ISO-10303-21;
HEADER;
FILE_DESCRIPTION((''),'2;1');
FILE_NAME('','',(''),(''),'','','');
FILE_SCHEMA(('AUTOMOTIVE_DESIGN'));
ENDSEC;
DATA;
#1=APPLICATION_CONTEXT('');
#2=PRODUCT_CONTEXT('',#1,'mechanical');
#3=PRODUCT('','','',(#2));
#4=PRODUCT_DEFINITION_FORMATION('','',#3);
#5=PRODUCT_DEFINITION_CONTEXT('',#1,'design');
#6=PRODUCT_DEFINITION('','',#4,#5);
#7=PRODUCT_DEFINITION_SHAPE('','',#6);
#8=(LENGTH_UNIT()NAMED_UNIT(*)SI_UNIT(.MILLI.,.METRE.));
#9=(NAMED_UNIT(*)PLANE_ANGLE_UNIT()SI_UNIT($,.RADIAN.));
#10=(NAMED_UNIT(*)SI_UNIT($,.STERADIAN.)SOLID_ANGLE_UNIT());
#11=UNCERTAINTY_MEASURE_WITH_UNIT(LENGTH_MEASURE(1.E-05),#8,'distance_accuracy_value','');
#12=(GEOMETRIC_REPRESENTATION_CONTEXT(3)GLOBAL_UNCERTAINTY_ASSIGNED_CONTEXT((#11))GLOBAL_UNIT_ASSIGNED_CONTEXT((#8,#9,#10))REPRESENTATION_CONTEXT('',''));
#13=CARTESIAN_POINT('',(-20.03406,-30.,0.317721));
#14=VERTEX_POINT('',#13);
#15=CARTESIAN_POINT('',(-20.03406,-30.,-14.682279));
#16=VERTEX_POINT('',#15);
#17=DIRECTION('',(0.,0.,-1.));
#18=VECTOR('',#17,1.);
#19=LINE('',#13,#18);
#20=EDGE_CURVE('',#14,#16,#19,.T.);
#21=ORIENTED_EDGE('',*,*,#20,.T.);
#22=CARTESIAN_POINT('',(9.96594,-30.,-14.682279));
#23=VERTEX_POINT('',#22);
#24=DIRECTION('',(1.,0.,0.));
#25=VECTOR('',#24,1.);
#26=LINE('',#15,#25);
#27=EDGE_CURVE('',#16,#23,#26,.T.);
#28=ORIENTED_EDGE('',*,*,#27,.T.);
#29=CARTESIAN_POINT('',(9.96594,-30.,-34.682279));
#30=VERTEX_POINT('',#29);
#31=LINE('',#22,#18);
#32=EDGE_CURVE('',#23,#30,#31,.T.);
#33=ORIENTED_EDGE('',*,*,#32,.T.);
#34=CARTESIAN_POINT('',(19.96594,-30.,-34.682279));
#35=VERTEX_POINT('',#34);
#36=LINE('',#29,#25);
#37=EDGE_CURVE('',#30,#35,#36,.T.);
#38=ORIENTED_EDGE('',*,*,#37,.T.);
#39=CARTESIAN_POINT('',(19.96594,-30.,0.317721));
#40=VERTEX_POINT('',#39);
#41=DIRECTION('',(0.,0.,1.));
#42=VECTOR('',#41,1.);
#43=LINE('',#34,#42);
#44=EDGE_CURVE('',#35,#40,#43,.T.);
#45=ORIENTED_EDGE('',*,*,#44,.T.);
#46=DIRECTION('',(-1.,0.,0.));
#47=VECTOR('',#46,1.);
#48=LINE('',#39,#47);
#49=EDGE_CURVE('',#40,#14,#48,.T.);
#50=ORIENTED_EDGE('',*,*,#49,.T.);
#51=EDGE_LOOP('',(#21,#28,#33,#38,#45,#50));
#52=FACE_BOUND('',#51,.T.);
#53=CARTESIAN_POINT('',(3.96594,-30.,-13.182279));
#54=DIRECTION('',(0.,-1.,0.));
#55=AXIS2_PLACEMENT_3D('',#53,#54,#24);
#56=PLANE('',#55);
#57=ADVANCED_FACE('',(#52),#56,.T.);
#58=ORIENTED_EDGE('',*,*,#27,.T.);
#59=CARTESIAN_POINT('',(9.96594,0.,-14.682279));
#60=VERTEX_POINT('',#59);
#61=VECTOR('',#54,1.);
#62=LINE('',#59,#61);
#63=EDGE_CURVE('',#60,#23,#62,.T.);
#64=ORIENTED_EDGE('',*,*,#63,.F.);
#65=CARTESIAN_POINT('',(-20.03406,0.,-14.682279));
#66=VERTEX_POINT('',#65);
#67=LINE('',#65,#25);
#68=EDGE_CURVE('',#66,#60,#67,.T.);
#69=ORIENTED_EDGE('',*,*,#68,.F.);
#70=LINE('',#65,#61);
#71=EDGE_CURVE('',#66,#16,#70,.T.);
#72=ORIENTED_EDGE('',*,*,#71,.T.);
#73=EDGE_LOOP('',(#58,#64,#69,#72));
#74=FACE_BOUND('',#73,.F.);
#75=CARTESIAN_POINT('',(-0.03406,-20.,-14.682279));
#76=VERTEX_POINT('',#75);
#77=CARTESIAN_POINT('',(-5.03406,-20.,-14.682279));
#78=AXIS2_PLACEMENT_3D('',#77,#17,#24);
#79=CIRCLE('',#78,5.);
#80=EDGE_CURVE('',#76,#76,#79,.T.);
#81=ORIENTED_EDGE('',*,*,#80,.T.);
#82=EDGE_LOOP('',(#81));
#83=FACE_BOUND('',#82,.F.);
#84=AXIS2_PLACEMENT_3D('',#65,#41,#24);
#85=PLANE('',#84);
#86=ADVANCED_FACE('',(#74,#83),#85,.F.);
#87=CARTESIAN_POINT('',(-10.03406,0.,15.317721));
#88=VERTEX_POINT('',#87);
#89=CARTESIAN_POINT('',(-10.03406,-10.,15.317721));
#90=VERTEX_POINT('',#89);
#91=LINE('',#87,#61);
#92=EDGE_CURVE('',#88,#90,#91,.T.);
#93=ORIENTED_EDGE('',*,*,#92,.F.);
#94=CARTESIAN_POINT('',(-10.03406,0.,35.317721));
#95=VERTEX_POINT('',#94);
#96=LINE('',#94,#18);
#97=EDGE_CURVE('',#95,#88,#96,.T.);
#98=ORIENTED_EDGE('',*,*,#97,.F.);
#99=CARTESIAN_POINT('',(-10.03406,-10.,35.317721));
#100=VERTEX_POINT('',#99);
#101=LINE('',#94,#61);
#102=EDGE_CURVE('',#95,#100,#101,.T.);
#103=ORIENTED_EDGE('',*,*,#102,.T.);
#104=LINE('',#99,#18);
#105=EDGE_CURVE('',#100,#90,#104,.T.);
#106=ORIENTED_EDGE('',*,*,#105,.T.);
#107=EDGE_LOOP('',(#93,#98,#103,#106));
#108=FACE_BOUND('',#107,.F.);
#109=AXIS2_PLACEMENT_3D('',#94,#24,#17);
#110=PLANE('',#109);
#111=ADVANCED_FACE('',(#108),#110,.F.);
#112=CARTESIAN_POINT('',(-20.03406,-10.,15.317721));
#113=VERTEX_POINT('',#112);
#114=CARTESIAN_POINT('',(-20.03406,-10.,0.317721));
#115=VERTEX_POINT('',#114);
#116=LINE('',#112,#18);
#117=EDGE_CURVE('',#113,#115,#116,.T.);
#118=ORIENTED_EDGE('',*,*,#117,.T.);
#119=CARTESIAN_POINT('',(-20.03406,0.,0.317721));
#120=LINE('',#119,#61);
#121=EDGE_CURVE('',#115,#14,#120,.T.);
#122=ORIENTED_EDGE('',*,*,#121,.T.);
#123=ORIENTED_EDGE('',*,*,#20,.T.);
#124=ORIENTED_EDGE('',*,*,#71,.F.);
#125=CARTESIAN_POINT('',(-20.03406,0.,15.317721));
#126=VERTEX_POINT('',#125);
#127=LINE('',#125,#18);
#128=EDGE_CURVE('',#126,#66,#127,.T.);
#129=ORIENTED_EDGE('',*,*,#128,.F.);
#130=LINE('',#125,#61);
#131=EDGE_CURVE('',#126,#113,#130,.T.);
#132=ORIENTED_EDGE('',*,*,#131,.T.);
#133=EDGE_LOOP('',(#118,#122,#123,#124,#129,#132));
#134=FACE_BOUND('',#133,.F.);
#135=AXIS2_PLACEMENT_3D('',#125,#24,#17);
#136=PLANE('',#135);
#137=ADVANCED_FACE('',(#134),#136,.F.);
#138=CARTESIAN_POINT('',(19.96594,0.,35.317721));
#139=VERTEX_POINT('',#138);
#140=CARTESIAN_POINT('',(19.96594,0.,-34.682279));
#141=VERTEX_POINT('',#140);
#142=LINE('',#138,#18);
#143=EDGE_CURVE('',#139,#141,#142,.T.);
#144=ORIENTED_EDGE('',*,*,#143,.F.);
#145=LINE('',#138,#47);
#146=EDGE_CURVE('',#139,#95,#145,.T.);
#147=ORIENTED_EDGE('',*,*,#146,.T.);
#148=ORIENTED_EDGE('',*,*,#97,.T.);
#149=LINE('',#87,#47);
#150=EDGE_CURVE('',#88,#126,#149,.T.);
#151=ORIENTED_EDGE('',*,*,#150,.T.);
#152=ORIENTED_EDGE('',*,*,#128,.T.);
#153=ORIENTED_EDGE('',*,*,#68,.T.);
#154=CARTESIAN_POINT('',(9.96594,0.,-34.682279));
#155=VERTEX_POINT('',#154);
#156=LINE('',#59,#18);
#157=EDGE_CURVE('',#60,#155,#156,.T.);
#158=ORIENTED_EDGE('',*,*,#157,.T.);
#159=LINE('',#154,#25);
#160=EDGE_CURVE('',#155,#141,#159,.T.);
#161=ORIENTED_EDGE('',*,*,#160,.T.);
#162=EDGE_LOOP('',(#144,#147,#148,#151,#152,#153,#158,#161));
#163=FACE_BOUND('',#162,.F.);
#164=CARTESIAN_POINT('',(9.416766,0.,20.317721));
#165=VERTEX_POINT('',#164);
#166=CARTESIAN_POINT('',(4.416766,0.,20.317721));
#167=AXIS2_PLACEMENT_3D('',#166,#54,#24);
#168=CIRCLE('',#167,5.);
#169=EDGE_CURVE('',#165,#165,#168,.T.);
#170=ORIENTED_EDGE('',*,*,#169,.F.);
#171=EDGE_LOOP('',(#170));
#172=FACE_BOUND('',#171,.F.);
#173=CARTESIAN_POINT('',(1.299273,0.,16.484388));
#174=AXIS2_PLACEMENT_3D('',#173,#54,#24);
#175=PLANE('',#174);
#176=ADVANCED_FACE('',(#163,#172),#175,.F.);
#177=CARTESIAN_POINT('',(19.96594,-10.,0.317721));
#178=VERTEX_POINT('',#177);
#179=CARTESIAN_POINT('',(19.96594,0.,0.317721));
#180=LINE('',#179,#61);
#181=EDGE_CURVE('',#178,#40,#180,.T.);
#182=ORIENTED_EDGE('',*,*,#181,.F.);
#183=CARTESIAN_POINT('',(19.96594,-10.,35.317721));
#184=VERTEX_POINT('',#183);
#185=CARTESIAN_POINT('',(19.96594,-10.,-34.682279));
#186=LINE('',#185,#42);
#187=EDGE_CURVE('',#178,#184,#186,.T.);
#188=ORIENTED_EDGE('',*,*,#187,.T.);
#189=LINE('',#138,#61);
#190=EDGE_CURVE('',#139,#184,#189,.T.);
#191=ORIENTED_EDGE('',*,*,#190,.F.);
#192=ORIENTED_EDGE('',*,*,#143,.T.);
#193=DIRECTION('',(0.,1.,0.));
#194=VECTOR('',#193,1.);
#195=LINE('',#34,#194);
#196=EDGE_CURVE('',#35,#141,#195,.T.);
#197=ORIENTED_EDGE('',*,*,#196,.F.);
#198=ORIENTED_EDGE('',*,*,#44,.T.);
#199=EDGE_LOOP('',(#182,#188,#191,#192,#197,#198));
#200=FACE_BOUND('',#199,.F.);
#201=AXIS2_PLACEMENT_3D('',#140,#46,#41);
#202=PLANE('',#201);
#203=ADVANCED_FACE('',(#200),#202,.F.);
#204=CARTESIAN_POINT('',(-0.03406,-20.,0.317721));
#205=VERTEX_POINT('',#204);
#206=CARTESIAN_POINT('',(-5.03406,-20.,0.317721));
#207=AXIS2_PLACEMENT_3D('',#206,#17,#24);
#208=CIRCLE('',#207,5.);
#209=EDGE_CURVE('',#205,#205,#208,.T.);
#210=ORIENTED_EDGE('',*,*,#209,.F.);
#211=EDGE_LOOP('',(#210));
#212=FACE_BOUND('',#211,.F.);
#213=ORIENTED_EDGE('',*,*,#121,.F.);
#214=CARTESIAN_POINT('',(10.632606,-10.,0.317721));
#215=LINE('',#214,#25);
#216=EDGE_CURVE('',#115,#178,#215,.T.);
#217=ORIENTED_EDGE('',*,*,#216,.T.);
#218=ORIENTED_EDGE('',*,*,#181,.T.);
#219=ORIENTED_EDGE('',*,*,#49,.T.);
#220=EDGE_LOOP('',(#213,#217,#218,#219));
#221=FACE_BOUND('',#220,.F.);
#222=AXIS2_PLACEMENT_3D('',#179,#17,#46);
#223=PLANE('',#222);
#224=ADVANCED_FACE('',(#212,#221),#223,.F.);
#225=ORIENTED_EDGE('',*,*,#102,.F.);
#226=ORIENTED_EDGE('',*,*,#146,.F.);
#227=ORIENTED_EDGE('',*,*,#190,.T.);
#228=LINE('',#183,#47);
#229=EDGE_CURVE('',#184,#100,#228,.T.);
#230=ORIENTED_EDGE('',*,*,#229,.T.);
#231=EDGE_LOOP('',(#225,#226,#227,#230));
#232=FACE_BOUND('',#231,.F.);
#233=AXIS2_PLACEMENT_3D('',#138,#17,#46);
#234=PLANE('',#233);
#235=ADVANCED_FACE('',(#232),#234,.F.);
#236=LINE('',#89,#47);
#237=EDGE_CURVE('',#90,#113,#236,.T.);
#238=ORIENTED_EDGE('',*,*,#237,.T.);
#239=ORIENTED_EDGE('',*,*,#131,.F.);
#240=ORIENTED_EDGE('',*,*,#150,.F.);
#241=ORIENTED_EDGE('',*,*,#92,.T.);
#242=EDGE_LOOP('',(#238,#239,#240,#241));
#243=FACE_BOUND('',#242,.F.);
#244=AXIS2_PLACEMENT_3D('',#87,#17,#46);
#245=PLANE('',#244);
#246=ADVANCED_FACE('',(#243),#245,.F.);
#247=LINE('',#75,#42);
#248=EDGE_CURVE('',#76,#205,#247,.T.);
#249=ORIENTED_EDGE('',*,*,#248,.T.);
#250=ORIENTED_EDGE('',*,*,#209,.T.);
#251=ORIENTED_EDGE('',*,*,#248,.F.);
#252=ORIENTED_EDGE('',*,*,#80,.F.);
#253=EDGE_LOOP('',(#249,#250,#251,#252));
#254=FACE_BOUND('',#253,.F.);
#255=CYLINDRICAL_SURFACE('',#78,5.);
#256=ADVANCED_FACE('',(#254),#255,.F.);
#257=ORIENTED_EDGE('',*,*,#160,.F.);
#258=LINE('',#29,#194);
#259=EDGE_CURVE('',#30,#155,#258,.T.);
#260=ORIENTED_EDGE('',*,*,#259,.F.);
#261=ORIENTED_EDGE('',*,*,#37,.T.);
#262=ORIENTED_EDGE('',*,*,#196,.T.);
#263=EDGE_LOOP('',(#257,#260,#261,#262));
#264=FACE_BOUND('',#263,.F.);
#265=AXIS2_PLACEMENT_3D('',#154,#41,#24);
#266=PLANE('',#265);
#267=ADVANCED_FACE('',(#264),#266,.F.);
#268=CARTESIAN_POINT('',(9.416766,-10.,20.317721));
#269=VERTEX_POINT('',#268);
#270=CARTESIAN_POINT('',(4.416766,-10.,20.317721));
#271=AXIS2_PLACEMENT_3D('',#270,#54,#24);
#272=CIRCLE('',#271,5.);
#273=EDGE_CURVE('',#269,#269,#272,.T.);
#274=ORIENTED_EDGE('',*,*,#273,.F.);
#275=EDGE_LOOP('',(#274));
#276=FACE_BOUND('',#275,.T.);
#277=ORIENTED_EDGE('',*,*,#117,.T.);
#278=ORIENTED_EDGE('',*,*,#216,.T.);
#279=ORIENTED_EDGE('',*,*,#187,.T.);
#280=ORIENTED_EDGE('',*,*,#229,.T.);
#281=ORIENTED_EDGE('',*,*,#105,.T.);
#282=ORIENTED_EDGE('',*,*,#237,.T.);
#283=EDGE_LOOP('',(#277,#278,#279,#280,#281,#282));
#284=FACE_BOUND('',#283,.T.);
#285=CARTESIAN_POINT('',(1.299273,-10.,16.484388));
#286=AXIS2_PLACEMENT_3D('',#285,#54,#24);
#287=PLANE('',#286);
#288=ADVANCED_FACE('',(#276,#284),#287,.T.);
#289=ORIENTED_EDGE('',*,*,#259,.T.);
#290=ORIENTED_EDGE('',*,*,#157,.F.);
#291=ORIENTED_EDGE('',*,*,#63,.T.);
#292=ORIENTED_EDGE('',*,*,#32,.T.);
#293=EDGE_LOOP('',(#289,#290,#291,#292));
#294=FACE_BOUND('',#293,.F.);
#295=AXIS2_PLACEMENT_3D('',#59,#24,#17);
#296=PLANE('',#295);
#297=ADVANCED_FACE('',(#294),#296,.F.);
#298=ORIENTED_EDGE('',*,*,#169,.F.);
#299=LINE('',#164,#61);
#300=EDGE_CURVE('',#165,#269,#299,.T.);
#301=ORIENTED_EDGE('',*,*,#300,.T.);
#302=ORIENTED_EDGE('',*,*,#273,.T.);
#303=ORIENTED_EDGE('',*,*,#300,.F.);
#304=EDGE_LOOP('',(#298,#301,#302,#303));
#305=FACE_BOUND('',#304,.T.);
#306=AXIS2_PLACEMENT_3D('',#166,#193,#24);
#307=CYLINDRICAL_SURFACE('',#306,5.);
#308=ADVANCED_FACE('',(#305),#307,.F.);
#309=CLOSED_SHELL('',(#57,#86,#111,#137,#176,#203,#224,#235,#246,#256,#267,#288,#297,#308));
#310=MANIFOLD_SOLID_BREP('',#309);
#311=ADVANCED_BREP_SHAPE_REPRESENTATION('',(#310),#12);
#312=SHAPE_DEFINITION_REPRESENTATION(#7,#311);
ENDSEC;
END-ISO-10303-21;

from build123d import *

# Parameters (mm, degrees)
F0_R     = 5
F1_DEPTH = 10
F2_DEPTH = 30
F3_R     = 5
F4_DEPTH = 25


# Not quite as in the source:
# - a feature names something its author has since deleted; it is built from what else it names


with BuildPart() as f1:
    # F0 (on Front) → F1 (new body)
    with BuildSketch(Plane.XZ):
        Polygon((-10.0340604992, 15.3177212924), (-20.0340604992, 15.3177212924), (-20.0340604992, 0.3177212924), (19.9659395008, 0.3177212924), (19.9659395008, 35.3177212924), (-10.0340604992, 35.3177212924), align=None)
        with Locations((4.4167656451, 20.3177212924)):
            Circle(F0_R, mode=Mode.SUBTRACT)
        Polygon((19.9659395008, 0.3177212924), (-20.0340604992, 0.3177212924), (-20.0340604992, -14.6822787076), (9.9659395008, -14.6822787076), (9.9659395008, -34.6822787076), (19.9659395008, -34.6822787076), align=None)
    extrude(amount=F1_DEPTH)

    # F0 (on Front) → F2 (join)
    with BuildSketch(Plane.XZ):
        Polygon((19.9659395008, 0.3177212924), (-20.0340604992, 0.3177212924), (-20.0340604992, -14.6822787076), (9.9659395008, -14.6822787076), (9.9659395008, -34.6822787076), (19.9659395008, -34.6822787076), align=None)
    extrude(amount=F2_DEPTH)

    # F3 (on face) → F4 (cut)
    with BuildSketch(Plane(origin=(0, 0, -14.6822787076), x_dir=(1, 0, 0), z_dir=(0, 0, -1))):
        with Locations((-5.0340604992, 20)):
            Circle(F3_R)
    extrude(amount=-F4_DEPTH, mode=Mode.SUBTRACT)


solid = f1.part
